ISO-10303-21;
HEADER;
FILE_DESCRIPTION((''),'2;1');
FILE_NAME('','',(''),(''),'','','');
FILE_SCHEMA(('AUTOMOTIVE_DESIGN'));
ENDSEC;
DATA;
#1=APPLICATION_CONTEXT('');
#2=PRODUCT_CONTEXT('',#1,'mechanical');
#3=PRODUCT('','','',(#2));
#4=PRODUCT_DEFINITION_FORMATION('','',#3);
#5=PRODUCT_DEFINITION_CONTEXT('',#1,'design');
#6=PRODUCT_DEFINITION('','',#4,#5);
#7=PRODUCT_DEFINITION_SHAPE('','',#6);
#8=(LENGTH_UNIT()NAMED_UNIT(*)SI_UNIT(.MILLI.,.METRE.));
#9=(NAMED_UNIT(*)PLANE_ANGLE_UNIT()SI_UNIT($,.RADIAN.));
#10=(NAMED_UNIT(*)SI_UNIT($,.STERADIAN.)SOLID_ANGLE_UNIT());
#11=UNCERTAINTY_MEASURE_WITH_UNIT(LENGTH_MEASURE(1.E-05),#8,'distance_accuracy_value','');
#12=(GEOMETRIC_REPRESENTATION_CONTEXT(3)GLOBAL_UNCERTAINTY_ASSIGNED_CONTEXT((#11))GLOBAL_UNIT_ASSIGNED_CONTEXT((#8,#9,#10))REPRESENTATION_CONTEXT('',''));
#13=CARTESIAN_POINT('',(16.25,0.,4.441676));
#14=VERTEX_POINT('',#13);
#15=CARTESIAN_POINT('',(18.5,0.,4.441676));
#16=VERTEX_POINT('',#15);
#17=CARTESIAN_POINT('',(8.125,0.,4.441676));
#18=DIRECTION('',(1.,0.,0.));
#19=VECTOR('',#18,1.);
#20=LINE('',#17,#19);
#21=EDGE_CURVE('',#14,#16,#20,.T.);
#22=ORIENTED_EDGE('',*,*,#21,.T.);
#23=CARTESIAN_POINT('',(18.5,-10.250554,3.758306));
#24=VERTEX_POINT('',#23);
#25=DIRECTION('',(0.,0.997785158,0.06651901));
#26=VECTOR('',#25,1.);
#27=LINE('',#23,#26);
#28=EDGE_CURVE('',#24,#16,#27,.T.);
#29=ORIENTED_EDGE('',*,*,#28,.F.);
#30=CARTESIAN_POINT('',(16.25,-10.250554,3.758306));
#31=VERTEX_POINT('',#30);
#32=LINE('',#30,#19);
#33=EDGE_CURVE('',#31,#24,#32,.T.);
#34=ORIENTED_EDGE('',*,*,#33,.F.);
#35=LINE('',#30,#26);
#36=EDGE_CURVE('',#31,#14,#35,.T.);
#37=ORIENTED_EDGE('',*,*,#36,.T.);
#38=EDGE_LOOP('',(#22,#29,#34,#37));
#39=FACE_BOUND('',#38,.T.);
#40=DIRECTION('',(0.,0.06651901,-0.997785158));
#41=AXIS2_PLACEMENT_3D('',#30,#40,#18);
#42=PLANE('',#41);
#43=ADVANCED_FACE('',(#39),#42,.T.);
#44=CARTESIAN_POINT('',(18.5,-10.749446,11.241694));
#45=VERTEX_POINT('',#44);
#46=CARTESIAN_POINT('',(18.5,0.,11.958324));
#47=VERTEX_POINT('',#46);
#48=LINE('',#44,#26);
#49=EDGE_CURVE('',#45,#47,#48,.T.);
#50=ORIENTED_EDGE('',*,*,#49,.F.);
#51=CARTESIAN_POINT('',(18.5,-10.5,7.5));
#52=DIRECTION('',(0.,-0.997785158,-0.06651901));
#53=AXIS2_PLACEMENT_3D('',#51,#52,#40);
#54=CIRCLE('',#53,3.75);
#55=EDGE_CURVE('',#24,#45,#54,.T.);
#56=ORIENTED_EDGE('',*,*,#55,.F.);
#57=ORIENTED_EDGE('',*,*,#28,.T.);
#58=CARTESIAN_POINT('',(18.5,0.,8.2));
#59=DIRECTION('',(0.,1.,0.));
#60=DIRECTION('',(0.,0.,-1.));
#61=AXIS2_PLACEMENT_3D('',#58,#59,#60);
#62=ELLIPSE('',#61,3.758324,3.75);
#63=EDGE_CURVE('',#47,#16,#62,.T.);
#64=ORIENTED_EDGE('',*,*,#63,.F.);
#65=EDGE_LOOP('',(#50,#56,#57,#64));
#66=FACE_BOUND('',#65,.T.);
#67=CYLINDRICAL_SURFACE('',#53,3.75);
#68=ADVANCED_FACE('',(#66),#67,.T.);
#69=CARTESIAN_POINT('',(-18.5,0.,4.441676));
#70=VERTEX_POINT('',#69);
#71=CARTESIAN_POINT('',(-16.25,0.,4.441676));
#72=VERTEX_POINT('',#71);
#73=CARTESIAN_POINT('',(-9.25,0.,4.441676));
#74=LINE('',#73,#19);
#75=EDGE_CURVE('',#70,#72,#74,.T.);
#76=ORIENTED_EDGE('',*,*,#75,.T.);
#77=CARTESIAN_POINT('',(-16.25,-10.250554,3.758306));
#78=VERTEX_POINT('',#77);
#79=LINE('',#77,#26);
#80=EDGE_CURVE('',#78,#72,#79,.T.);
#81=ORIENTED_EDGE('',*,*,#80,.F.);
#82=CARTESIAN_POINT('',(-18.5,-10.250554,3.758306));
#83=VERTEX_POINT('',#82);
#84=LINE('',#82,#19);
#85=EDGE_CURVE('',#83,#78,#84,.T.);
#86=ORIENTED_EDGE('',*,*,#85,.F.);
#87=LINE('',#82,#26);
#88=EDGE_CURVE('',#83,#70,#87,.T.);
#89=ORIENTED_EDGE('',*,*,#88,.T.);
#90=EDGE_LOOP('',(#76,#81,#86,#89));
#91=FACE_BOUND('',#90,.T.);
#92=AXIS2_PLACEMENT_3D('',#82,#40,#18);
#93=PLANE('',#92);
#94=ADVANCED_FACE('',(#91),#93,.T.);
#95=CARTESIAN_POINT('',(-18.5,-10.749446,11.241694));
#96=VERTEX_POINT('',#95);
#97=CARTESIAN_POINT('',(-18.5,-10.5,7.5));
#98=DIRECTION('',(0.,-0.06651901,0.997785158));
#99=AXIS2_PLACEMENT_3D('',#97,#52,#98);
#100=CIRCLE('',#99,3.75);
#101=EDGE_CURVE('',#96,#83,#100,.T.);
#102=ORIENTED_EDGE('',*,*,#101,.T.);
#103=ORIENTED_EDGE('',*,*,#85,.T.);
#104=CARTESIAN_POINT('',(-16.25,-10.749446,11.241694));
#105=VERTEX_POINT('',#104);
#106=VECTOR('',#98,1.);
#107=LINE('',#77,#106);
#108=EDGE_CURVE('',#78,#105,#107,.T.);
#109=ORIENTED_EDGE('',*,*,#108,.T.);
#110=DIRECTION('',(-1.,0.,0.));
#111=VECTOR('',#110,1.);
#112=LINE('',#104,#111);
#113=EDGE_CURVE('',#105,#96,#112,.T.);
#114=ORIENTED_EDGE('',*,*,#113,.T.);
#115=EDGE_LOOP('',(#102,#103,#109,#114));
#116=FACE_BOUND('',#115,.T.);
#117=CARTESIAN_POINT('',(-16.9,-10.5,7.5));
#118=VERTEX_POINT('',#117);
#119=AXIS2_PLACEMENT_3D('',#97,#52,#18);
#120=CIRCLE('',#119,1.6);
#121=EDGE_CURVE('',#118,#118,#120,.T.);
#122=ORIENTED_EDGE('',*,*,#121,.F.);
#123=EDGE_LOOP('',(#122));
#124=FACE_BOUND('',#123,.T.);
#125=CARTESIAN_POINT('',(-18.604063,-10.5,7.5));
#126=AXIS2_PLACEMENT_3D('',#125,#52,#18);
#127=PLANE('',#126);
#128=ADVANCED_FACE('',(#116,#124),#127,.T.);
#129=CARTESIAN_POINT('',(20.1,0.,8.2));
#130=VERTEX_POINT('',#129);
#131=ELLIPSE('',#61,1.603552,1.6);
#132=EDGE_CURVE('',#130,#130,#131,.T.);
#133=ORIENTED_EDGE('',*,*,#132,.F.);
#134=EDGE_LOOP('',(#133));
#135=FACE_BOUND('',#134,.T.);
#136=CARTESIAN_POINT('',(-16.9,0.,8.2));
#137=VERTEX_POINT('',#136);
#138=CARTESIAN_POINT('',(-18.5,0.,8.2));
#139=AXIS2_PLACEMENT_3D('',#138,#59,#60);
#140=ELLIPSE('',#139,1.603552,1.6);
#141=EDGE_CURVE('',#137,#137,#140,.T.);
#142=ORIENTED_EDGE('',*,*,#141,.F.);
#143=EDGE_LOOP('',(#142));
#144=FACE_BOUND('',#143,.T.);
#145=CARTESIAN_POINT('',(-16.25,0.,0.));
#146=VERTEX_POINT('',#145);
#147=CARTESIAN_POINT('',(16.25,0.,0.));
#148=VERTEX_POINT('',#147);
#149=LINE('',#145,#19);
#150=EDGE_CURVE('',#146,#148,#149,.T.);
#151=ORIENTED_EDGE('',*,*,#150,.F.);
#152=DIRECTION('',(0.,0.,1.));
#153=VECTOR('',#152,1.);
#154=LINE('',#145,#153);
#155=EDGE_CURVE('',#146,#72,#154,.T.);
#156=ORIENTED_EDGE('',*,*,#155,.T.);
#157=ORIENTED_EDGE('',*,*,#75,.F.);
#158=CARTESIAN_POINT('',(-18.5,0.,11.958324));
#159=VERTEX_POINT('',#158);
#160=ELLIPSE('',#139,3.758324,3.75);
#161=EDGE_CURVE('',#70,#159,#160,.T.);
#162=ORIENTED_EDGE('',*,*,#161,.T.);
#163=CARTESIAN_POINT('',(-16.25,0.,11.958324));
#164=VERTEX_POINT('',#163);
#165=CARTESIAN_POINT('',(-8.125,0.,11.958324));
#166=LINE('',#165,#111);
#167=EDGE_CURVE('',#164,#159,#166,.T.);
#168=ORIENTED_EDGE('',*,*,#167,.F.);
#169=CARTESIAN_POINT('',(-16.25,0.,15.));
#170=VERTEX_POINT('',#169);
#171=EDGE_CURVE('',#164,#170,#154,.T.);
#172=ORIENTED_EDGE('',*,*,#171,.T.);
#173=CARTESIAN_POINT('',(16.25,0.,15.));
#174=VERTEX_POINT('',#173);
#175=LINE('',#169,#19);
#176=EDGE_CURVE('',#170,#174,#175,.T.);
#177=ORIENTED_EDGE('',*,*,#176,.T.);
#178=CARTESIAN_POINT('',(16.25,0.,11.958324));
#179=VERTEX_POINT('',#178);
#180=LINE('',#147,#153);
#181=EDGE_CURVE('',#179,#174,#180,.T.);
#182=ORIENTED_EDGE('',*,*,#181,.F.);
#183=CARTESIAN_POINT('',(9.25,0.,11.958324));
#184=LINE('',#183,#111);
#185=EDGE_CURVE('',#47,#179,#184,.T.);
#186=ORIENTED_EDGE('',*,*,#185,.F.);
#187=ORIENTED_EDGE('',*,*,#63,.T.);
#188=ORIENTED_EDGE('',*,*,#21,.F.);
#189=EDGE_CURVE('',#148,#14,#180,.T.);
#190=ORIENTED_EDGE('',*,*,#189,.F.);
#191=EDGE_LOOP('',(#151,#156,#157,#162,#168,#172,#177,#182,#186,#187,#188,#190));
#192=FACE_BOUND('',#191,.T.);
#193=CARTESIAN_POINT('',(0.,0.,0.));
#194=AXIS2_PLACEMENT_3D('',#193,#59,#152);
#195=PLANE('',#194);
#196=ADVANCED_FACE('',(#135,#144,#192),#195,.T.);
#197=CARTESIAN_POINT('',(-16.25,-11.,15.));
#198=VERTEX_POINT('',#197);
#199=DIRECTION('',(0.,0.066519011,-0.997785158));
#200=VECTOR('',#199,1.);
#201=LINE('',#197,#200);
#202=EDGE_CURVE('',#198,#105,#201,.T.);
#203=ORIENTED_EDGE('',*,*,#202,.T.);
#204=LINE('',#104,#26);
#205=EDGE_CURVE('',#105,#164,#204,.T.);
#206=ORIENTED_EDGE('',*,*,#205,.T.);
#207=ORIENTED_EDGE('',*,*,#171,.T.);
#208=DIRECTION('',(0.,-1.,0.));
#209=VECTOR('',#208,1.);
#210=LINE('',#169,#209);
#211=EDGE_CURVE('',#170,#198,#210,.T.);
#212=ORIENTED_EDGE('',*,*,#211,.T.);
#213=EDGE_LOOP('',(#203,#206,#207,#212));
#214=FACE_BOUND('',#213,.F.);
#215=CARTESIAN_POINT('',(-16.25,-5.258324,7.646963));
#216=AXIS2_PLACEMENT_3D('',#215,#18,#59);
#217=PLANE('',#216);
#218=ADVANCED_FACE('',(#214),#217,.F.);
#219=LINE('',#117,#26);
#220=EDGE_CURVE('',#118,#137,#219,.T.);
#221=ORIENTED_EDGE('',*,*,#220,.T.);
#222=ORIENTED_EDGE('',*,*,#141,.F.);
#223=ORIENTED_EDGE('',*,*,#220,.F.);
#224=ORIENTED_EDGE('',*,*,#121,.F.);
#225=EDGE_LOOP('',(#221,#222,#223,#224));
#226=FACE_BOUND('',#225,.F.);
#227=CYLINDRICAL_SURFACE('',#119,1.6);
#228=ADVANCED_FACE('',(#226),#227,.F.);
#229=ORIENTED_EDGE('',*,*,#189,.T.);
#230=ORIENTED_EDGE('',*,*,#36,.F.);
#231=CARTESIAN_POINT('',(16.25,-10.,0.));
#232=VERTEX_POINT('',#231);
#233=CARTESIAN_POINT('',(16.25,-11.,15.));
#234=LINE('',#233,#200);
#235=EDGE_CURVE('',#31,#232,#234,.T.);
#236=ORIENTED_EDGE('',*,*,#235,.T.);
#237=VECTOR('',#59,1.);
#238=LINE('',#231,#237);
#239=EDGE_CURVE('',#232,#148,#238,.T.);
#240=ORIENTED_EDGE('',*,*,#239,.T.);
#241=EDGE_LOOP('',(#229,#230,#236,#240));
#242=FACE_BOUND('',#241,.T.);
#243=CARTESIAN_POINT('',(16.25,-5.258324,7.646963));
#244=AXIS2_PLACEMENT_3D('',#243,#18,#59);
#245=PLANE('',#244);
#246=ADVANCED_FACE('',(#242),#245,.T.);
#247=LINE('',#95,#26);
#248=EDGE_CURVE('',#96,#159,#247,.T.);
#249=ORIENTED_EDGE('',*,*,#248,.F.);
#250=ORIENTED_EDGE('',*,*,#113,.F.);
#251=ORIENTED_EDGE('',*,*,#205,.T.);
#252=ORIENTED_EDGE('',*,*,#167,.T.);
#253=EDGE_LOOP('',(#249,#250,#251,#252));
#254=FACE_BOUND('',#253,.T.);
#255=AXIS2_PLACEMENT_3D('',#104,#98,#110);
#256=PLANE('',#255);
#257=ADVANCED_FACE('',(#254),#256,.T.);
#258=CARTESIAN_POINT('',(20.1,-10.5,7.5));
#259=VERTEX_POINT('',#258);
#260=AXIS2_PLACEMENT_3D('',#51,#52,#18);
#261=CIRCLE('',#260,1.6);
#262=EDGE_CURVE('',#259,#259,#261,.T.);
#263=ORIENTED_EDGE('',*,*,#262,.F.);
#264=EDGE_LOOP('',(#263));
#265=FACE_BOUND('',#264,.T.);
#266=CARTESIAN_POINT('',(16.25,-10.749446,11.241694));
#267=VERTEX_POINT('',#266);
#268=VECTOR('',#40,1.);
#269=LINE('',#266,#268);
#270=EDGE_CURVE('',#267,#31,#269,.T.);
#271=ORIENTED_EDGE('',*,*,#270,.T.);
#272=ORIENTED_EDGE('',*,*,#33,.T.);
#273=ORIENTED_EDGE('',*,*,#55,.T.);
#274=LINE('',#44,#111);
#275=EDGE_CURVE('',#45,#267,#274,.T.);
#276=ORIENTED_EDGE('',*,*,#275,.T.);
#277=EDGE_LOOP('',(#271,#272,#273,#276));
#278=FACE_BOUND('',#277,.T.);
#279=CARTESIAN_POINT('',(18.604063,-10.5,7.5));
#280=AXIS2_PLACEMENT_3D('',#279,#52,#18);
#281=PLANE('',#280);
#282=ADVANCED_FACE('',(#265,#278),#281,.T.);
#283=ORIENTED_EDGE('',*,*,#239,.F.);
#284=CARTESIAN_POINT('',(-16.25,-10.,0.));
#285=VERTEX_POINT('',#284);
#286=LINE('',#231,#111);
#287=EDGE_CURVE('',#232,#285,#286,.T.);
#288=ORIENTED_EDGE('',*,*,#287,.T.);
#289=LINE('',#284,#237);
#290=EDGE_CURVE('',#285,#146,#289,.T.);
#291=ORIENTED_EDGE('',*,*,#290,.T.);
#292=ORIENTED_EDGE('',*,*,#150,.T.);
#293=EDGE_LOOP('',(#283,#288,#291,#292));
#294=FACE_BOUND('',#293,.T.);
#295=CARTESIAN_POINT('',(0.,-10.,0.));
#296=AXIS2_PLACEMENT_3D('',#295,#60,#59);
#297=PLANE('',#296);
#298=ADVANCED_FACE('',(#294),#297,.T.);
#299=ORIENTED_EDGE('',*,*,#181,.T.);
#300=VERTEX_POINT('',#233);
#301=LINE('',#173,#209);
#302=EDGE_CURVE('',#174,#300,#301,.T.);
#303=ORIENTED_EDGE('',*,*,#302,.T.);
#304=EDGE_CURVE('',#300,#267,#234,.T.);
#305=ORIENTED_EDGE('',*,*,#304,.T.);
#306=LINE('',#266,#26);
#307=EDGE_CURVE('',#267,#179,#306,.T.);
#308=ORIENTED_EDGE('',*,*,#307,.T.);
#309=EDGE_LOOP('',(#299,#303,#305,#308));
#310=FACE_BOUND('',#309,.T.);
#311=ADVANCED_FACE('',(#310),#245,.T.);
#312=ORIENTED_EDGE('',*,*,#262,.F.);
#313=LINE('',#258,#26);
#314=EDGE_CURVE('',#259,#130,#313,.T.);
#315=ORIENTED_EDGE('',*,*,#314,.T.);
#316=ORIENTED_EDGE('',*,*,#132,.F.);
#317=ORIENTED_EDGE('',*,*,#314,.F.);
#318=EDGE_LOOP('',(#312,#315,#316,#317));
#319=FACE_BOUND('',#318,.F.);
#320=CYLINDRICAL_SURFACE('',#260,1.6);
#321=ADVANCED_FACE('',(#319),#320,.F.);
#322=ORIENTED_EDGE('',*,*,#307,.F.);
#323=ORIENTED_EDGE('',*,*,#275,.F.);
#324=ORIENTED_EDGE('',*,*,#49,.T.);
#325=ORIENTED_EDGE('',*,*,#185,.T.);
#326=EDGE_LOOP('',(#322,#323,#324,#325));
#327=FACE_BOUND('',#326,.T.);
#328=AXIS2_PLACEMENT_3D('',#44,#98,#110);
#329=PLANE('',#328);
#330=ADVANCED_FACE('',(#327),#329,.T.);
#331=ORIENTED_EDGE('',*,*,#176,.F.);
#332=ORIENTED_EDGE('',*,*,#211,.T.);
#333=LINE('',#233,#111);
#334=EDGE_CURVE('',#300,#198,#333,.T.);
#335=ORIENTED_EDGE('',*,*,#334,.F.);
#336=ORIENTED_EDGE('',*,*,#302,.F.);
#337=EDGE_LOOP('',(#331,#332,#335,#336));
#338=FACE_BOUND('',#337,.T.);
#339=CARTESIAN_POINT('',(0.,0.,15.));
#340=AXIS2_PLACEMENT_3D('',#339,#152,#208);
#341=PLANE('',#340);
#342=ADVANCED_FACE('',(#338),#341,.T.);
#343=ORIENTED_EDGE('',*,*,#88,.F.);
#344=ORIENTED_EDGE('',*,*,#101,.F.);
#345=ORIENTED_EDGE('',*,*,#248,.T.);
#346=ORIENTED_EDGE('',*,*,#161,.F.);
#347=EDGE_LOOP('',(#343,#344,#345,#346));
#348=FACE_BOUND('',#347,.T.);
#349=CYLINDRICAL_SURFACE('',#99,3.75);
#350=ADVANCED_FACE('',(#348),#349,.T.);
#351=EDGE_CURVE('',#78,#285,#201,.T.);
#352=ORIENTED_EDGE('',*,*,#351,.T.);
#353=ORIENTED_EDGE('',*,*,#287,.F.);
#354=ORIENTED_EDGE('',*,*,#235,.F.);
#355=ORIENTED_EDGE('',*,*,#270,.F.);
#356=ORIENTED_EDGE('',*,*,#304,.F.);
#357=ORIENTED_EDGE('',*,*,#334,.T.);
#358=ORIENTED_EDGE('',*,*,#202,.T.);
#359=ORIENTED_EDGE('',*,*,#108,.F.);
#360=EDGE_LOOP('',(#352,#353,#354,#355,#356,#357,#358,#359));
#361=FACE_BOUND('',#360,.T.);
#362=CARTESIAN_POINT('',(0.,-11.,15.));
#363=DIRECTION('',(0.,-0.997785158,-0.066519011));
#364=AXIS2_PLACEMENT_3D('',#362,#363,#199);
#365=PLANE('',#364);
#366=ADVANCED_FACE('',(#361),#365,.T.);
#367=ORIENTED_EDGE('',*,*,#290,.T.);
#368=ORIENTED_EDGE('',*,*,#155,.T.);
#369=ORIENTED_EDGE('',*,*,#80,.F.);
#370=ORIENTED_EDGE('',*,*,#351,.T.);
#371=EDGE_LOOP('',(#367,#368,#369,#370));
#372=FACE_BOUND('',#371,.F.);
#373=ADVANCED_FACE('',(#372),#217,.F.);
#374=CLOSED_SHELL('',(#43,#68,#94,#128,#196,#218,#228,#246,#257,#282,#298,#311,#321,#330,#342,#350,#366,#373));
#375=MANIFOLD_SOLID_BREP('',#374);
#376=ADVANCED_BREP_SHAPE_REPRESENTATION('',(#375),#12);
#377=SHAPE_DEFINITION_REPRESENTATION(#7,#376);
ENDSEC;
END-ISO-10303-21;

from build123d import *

# Parameters (mm, degrees)
F1_DEPTH = 16.25
F2_R     = 1.6
F3_REACH = 20.5813230926


with BuildPart() as f1:
    # F0 (on Right) → F1 (new body, symmetric)
    with BuildSketch(Plane.YZ):
        Polygon((-10, 0), (0, 0), (0, 15), (-11, 15), align=None)
    extrude(amount=F1_DEPTH, both=True)

    f3_end = Plane(origin=(0, 0, 7.5), x_dir=(0, 0, 1), z_dir=(0, 1, 0))
    # F2 (on face) → F3 (join, up to a plane its end follows)
    with BuildSketch(Plane(origin=(0, -9.9557522124, -0.6637168142), x_dir=(1, 0, 0), z_dir=(0, -0.9977851579, -0.0665190105))):
        with BuildLine():
            Line((-18.5, 4.4318382944), (-16.25, 4.4318382944))
            Line((-16.25, 4.4318382944), (-16.25, 11.9318382944))
            Line((-16.25, 11.9318382944), (-18.5, 11.9318382944))
            ThreePointArc((-18.5, 11.9318382944), (-22.25, 8.1818382944), (-18.5, 4.4318382944))
        make_face()
        with Locations((-18.5, 8.1818382944)):
            Circle(F2_R, mode=Mode.SUBTRACT)
        with BuildLine():
            Line((16.25, 4.4318382944), (18.5, 4.4318382944))
            ThreePointArc((18.5, 4.4318382944), (22.25, 8.1818382944), (18.5, 11.9318382944))
            Line((18.5, 11.9318382944), (16.25, 11.9318382944))
            Line((16.25, 11.9318382944), (16.25, 4.4318382944))
        make_face()
        with Locations((18.5, 8.1818382944)):
            Circle(F2_R, mode=Mode.SUBTRACT)
    f3_long = extrude(amount=-F3_REACH, mode=Mode.PRIVATE)
    add(split(f3_long, bisect_by=f3_end, keep=Keep.BOTTOM, mode=Mode.PRIVATE))


solid = f1.part
